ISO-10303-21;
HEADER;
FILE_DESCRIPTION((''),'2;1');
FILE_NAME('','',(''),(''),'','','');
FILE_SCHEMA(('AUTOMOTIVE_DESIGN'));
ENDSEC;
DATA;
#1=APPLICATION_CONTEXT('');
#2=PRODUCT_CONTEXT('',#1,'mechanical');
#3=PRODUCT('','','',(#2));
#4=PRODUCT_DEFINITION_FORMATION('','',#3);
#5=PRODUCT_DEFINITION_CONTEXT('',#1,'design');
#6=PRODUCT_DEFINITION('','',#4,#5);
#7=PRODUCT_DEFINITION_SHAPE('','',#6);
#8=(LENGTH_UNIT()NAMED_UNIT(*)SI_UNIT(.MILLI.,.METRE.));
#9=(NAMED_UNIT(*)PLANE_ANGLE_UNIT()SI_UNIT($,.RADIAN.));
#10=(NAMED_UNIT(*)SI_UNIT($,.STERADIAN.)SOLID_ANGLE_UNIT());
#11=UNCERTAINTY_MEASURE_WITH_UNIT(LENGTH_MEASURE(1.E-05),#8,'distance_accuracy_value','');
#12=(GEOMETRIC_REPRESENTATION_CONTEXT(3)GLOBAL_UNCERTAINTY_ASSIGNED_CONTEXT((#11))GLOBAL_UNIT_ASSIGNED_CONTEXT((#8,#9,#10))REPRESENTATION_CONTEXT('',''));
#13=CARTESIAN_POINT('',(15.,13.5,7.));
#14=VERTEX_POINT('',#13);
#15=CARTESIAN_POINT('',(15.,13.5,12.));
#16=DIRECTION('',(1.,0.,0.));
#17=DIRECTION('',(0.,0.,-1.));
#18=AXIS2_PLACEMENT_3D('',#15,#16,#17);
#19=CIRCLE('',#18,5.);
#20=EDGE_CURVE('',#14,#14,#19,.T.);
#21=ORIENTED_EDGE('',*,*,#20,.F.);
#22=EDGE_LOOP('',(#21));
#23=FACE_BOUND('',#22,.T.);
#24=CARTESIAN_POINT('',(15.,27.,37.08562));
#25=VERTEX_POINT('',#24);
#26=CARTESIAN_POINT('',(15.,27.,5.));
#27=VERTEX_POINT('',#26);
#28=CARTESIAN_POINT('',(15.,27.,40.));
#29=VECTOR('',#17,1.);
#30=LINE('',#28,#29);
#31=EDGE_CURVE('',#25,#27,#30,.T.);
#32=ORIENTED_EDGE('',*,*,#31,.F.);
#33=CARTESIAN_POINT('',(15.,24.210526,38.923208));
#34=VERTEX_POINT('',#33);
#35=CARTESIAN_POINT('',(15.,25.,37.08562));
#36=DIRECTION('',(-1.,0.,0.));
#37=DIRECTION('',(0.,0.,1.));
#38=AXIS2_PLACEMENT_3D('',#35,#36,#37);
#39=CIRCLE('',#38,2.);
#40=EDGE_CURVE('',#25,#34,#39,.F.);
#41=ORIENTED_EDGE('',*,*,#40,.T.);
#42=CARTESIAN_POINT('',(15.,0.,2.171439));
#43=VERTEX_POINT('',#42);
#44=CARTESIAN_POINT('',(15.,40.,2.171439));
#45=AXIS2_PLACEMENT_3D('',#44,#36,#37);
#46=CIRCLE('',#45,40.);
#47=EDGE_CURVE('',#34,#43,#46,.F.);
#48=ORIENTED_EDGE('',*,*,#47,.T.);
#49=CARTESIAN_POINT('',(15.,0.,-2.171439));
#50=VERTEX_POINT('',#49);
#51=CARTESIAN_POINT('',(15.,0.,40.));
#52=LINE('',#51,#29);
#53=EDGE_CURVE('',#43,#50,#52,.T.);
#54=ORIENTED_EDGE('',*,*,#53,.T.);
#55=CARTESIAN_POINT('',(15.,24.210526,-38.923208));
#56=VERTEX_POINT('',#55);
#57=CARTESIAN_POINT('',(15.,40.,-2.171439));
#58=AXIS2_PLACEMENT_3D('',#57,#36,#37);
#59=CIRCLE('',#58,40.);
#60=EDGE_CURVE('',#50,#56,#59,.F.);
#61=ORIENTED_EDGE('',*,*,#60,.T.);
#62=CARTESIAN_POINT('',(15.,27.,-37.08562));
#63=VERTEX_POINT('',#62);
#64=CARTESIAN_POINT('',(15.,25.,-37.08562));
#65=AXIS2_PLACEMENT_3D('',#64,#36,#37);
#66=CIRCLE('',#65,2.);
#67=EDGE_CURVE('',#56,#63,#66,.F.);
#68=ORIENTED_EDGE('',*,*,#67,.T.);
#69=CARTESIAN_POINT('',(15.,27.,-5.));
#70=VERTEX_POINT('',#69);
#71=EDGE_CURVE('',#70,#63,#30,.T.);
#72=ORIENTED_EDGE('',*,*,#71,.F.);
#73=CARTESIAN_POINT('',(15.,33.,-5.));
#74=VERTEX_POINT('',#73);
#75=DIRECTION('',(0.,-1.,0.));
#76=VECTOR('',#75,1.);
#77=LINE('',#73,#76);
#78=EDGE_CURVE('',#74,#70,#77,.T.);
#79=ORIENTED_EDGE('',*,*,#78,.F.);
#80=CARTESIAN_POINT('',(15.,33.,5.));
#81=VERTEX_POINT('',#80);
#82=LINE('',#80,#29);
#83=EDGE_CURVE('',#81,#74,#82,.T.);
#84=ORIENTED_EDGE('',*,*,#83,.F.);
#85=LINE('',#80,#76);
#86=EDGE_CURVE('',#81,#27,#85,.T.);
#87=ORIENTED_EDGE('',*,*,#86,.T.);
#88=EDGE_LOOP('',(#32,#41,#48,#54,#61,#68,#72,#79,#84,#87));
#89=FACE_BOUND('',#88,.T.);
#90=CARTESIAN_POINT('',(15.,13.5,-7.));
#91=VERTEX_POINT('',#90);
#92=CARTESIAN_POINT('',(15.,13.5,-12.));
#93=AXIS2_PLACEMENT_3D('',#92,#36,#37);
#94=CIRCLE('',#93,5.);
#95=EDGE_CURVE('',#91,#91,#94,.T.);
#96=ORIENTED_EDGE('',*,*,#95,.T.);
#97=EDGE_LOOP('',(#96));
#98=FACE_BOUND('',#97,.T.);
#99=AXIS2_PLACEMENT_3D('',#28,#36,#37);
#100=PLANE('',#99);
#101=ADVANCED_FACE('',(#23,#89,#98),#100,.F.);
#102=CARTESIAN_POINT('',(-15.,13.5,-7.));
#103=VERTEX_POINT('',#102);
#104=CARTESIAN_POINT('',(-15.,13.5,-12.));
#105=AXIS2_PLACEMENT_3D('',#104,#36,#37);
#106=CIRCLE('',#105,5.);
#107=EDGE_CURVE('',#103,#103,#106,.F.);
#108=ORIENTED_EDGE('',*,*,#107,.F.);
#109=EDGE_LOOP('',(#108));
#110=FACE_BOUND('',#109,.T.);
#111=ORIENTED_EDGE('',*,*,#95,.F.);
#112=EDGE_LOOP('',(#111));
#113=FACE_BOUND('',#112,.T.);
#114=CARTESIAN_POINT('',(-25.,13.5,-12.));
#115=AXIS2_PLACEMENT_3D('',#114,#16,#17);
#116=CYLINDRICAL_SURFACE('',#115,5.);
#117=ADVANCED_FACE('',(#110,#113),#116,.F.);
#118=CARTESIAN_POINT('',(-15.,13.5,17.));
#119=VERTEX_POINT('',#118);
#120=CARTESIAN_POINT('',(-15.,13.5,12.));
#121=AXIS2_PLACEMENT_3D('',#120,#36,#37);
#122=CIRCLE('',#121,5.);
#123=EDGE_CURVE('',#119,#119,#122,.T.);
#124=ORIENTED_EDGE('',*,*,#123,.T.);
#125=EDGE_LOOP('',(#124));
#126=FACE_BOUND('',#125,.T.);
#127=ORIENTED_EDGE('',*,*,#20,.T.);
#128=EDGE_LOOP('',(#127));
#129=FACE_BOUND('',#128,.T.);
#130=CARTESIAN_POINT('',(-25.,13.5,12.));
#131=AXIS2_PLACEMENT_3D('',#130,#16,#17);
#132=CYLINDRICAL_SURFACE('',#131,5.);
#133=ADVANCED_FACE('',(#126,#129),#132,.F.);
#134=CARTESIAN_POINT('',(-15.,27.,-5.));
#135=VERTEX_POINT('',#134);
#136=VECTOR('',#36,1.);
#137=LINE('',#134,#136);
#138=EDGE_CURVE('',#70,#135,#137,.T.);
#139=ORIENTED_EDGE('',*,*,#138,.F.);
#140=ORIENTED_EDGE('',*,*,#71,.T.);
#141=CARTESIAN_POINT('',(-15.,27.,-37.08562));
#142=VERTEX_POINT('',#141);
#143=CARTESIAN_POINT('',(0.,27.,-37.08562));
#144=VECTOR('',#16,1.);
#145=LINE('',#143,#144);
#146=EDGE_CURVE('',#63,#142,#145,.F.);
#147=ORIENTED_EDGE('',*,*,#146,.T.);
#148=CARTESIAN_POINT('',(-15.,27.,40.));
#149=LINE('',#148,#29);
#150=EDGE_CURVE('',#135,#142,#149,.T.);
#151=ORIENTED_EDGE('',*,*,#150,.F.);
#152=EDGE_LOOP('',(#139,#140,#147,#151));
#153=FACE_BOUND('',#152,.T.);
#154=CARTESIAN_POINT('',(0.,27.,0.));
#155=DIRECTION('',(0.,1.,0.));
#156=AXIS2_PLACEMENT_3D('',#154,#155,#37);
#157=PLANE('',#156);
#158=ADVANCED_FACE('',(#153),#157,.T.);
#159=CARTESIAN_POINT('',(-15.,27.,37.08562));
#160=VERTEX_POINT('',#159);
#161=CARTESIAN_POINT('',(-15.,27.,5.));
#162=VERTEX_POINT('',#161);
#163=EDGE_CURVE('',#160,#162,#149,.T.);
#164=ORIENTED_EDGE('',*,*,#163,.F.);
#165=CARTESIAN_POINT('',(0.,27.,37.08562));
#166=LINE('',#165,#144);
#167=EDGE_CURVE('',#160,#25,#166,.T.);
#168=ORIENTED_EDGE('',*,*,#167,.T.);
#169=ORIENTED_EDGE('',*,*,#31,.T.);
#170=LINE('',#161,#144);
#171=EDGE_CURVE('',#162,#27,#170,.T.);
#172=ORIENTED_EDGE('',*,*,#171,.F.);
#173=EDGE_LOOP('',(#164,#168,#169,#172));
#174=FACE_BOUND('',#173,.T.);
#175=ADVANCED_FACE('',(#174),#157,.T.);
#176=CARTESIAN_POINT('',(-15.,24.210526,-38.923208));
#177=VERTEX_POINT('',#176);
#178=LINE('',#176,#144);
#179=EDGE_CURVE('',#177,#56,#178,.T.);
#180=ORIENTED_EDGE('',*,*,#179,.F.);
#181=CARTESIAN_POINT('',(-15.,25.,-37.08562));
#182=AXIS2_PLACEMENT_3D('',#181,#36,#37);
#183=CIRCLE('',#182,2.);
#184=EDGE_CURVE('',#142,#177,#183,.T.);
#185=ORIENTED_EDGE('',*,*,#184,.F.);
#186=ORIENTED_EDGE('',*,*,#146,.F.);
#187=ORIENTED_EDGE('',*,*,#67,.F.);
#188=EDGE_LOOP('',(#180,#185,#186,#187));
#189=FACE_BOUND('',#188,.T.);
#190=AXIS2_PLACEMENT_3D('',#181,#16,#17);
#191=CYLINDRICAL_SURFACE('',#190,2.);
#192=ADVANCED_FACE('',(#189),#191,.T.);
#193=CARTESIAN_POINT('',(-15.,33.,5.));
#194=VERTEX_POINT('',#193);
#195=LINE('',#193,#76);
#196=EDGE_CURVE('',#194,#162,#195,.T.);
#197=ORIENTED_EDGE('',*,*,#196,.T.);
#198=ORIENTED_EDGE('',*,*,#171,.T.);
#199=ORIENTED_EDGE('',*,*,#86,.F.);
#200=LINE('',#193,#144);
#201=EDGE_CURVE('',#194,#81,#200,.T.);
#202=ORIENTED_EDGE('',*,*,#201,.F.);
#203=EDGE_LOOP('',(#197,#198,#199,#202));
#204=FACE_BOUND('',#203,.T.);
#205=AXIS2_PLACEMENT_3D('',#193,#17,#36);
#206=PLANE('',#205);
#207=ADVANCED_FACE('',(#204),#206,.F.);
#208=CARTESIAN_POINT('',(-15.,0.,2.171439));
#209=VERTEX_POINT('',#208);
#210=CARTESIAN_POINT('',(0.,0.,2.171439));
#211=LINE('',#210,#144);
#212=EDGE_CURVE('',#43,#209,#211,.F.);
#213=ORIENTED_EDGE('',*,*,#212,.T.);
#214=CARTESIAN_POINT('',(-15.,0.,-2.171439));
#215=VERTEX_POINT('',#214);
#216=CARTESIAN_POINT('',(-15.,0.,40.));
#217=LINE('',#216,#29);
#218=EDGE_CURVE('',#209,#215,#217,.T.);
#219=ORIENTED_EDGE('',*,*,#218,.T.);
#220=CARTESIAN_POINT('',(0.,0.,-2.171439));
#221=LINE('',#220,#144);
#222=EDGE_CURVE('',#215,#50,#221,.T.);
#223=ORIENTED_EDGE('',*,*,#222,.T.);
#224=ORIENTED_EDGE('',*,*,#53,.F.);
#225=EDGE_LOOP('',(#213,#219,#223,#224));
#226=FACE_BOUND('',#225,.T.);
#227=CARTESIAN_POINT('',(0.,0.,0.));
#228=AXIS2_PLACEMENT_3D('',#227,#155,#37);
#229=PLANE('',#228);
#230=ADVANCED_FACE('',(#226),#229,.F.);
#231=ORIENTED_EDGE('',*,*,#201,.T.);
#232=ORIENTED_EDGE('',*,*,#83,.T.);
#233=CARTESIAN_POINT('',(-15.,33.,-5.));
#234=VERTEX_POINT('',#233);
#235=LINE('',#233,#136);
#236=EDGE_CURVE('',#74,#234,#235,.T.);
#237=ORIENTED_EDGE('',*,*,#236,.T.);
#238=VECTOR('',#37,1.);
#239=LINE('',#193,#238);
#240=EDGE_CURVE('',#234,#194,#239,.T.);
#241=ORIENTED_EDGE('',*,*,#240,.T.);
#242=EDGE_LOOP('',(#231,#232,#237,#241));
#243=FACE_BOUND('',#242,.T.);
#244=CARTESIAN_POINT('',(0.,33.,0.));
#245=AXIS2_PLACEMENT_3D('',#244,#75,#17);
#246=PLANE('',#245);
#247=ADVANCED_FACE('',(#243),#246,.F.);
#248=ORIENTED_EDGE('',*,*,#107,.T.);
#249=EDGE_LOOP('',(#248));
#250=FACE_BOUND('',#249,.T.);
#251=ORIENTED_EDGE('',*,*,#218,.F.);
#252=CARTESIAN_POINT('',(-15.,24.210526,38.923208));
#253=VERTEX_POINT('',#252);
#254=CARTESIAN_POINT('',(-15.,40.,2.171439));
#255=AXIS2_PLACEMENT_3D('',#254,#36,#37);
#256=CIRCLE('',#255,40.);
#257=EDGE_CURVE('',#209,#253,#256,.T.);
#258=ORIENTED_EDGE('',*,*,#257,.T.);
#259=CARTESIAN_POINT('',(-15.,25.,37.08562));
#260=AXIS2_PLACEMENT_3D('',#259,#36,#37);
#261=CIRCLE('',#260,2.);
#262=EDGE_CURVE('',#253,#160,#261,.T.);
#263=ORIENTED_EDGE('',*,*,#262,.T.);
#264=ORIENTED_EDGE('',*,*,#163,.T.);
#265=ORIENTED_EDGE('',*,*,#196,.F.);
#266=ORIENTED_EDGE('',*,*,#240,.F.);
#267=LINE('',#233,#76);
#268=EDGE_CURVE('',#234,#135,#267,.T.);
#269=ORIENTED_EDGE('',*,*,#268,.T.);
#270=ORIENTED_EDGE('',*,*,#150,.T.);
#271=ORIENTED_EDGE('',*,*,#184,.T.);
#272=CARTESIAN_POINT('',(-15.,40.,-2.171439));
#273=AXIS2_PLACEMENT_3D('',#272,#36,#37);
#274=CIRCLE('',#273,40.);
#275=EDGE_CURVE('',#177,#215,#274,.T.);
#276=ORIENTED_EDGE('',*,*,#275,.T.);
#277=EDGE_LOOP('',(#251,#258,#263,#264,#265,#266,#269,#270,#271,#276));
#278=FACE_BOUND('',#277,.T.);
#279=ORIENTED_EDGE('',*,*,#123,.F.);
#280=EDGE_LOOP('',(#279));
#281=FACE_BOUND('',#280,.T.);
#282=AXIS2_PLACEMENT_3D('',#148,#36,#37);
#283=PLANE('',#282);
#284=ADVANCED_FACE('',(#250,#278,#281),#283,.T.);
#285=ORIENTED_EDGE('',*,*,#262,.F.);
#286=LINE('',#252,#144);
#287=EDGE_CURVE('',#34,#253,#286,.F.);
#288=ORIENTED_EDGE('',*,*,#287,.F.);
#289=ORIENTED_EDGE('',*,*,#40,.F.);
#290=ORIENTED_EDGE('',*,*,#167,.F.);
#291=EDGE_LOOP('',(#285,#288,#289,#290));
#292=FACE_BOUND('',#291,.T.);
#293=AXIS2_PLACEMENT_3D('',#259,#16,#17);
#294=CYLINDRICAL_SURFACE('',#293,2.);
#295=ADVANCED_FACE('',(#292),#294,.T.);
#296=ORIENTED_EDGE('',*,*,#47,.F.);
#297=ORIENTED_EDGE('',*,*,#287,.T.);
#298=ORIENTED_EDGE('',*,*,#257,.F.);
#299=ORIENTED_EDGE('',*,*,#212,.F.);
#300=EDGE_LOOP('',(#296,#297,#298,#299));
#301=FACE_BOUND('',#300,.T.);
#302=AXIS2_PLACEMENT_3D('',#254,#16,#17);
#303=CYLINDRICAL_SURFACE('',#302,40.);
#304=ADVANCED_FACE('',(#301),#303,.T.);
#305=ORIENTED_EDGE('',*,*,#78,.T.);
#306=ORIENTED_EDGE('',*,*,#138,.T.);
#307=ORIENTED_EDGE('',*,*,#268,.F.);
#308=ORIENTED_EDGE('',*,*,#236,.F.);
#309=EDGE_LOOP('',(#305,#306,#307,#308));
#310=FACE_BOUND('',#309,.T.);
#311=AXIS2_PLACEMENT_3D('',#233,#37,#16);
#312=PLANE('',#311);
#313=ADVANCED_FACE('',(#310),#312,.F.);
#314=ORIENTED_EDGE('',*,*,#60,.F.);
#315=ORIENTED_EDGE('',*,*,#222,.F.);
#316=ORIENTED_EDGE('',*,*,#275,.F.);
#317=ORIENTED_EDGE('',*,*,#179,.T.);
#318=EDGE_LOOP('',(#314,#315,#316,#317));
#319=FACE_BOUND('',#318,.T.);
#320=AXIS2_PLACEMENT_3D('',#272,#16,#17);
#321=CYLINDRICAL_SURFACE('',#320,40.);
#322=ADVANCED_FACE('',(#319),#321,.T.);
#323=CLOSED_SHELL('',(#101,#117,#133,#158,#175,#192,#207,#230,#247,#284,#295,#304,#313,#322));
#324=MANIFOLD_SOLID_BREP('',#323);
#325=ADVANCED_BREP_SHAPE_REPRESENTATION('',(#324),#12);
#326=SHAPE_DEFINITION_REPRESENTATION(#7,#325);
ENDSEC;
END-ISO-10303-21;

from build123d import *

# Parameters (mm, degrees)
SKETCH1_W           = 30
SKETCH1_H           = 80
BOSS_EXTRUDE1_DEPTH = 27
SKETCH5_W           = 30
SKETCH5_H           = 10
BOSS_EXTRUDE2_DEPTH = 6
SKETCH2_R           = 5
CUT_EXTRUDE1_DEPTH  = 40
FILLET5_R           = 40
FILLET6_R           = 40
FILLET7_R           = 2
FILLET8_R           = 2


with BuildPart() as part:
    # Sketch1 → Boss-Extrude1 (new body)
    with BuildSketch(Plane(origin=(0, 0, 0), x_dir=(1, 0, 0), z_dir=(0, 1, 0))):
        Rectangle(SKETCH1_W, SKETCH1_H)
    extrude(amount=BOSS_EXTRUDE1_DEPTH)

    # Sketch5 → Boss-Extrude2 (add)
    with BuildSketch(Plane(origin=(0, 27, 0), x_dir=(1, 0, 0), z_dir=(0, 1, 0))):
        Rectangle(SKETCH5_W, SKETCH5_H)
    extrude(amount=BOSS_EXTRUDE2_DEPTH)

    # Sketch2 → Cut-Extrude1 (cut)
    with BuildSketch(Plane(origin=(15, 0, 0), x_dir=(0, 0, -1), z_dir=(1, 0, 0))):
        with Locations((-12, 13.5)):
            Circle(SKETCH2_R)
        with Locations(Location((12, 13.5, 0), (0, 0, 180))):
            Circle(SKETCH2_R)
    extrude(amount=-CUT_EXTRUDE1_DEPTH, mode=Mode.SUBTRACT)

    # Fillet5
    # the kernel refuses this fillet: 40 mm, written as the material it takes off along each edge
    with BuildSketch(Plane(origin=(109.571401597, 0, -40), x_dir=(0, 0, 1), z_dir=(-1, 0, 0))) as fillet5_piece_1:
        with BuildLine():
            CenterArc((37.828560639, 40), FILLET5_R, 198.965574989, 71.034425011)
            Line((0, 27), (-0.756571213, 26.74))
            ThreePointArc((-0.756571213, 26.74), (-0.8, 13.5), (-0.8, 0))
            Line((-0.8, 0), (0, -0.8))
            Line((0, -0.8), (37.828560639, -0.8))
            Line((37.828560639, -0.8), (37.828560639, 0))
        make_face()
    extrude(amount=219.142803194, mode=Mode.SUBTRACT)

    # Fillet6
    # the kernel refuses this fillet: 40 mm, written as the material it takes off along each edge
    with BuildSketch(Plane(origin=(-109.571401597, 0, 40), x_dir=(0, 1, 0), z_dir=(1, 0, 0))) as fillet6_piece_1:
        with BuildLine():
            CenterArc((40, -37.828560639), FILLET6_R, 108.965574989, 71.034425011)
            Line((0, -37.828560639), (-0.8, -37.828560639))
            Line((-0.8, -37.828560639), (-0.8, 0))
            Line((-0.8, 0), (0, 0.8))
            ThreePointArc((0, 0.8), (13.5, 0.8), (26.74, 0.756571213))
            Line((26.74, 0.756571213), (27, 0))
        make_face()
    extrude(amount=219.142803194, mode=Mode.SUBTRACT)

    # Fillet7
    fillet7_edges = [part.edges().sort_by_distance(p)[0] for p in [
        (0, 27, -40),
    ]]
    fillet(fillet7_edges, radius=FILLET7_R)

    # Fillet8
    fillet8_edges = [part.edges().sort_by_distance(p)[0] for p in [
        (0, 27, 40),
    ]]
    fillet(fillet8_edges, radius=FILLET8_R)


solid = part.part
